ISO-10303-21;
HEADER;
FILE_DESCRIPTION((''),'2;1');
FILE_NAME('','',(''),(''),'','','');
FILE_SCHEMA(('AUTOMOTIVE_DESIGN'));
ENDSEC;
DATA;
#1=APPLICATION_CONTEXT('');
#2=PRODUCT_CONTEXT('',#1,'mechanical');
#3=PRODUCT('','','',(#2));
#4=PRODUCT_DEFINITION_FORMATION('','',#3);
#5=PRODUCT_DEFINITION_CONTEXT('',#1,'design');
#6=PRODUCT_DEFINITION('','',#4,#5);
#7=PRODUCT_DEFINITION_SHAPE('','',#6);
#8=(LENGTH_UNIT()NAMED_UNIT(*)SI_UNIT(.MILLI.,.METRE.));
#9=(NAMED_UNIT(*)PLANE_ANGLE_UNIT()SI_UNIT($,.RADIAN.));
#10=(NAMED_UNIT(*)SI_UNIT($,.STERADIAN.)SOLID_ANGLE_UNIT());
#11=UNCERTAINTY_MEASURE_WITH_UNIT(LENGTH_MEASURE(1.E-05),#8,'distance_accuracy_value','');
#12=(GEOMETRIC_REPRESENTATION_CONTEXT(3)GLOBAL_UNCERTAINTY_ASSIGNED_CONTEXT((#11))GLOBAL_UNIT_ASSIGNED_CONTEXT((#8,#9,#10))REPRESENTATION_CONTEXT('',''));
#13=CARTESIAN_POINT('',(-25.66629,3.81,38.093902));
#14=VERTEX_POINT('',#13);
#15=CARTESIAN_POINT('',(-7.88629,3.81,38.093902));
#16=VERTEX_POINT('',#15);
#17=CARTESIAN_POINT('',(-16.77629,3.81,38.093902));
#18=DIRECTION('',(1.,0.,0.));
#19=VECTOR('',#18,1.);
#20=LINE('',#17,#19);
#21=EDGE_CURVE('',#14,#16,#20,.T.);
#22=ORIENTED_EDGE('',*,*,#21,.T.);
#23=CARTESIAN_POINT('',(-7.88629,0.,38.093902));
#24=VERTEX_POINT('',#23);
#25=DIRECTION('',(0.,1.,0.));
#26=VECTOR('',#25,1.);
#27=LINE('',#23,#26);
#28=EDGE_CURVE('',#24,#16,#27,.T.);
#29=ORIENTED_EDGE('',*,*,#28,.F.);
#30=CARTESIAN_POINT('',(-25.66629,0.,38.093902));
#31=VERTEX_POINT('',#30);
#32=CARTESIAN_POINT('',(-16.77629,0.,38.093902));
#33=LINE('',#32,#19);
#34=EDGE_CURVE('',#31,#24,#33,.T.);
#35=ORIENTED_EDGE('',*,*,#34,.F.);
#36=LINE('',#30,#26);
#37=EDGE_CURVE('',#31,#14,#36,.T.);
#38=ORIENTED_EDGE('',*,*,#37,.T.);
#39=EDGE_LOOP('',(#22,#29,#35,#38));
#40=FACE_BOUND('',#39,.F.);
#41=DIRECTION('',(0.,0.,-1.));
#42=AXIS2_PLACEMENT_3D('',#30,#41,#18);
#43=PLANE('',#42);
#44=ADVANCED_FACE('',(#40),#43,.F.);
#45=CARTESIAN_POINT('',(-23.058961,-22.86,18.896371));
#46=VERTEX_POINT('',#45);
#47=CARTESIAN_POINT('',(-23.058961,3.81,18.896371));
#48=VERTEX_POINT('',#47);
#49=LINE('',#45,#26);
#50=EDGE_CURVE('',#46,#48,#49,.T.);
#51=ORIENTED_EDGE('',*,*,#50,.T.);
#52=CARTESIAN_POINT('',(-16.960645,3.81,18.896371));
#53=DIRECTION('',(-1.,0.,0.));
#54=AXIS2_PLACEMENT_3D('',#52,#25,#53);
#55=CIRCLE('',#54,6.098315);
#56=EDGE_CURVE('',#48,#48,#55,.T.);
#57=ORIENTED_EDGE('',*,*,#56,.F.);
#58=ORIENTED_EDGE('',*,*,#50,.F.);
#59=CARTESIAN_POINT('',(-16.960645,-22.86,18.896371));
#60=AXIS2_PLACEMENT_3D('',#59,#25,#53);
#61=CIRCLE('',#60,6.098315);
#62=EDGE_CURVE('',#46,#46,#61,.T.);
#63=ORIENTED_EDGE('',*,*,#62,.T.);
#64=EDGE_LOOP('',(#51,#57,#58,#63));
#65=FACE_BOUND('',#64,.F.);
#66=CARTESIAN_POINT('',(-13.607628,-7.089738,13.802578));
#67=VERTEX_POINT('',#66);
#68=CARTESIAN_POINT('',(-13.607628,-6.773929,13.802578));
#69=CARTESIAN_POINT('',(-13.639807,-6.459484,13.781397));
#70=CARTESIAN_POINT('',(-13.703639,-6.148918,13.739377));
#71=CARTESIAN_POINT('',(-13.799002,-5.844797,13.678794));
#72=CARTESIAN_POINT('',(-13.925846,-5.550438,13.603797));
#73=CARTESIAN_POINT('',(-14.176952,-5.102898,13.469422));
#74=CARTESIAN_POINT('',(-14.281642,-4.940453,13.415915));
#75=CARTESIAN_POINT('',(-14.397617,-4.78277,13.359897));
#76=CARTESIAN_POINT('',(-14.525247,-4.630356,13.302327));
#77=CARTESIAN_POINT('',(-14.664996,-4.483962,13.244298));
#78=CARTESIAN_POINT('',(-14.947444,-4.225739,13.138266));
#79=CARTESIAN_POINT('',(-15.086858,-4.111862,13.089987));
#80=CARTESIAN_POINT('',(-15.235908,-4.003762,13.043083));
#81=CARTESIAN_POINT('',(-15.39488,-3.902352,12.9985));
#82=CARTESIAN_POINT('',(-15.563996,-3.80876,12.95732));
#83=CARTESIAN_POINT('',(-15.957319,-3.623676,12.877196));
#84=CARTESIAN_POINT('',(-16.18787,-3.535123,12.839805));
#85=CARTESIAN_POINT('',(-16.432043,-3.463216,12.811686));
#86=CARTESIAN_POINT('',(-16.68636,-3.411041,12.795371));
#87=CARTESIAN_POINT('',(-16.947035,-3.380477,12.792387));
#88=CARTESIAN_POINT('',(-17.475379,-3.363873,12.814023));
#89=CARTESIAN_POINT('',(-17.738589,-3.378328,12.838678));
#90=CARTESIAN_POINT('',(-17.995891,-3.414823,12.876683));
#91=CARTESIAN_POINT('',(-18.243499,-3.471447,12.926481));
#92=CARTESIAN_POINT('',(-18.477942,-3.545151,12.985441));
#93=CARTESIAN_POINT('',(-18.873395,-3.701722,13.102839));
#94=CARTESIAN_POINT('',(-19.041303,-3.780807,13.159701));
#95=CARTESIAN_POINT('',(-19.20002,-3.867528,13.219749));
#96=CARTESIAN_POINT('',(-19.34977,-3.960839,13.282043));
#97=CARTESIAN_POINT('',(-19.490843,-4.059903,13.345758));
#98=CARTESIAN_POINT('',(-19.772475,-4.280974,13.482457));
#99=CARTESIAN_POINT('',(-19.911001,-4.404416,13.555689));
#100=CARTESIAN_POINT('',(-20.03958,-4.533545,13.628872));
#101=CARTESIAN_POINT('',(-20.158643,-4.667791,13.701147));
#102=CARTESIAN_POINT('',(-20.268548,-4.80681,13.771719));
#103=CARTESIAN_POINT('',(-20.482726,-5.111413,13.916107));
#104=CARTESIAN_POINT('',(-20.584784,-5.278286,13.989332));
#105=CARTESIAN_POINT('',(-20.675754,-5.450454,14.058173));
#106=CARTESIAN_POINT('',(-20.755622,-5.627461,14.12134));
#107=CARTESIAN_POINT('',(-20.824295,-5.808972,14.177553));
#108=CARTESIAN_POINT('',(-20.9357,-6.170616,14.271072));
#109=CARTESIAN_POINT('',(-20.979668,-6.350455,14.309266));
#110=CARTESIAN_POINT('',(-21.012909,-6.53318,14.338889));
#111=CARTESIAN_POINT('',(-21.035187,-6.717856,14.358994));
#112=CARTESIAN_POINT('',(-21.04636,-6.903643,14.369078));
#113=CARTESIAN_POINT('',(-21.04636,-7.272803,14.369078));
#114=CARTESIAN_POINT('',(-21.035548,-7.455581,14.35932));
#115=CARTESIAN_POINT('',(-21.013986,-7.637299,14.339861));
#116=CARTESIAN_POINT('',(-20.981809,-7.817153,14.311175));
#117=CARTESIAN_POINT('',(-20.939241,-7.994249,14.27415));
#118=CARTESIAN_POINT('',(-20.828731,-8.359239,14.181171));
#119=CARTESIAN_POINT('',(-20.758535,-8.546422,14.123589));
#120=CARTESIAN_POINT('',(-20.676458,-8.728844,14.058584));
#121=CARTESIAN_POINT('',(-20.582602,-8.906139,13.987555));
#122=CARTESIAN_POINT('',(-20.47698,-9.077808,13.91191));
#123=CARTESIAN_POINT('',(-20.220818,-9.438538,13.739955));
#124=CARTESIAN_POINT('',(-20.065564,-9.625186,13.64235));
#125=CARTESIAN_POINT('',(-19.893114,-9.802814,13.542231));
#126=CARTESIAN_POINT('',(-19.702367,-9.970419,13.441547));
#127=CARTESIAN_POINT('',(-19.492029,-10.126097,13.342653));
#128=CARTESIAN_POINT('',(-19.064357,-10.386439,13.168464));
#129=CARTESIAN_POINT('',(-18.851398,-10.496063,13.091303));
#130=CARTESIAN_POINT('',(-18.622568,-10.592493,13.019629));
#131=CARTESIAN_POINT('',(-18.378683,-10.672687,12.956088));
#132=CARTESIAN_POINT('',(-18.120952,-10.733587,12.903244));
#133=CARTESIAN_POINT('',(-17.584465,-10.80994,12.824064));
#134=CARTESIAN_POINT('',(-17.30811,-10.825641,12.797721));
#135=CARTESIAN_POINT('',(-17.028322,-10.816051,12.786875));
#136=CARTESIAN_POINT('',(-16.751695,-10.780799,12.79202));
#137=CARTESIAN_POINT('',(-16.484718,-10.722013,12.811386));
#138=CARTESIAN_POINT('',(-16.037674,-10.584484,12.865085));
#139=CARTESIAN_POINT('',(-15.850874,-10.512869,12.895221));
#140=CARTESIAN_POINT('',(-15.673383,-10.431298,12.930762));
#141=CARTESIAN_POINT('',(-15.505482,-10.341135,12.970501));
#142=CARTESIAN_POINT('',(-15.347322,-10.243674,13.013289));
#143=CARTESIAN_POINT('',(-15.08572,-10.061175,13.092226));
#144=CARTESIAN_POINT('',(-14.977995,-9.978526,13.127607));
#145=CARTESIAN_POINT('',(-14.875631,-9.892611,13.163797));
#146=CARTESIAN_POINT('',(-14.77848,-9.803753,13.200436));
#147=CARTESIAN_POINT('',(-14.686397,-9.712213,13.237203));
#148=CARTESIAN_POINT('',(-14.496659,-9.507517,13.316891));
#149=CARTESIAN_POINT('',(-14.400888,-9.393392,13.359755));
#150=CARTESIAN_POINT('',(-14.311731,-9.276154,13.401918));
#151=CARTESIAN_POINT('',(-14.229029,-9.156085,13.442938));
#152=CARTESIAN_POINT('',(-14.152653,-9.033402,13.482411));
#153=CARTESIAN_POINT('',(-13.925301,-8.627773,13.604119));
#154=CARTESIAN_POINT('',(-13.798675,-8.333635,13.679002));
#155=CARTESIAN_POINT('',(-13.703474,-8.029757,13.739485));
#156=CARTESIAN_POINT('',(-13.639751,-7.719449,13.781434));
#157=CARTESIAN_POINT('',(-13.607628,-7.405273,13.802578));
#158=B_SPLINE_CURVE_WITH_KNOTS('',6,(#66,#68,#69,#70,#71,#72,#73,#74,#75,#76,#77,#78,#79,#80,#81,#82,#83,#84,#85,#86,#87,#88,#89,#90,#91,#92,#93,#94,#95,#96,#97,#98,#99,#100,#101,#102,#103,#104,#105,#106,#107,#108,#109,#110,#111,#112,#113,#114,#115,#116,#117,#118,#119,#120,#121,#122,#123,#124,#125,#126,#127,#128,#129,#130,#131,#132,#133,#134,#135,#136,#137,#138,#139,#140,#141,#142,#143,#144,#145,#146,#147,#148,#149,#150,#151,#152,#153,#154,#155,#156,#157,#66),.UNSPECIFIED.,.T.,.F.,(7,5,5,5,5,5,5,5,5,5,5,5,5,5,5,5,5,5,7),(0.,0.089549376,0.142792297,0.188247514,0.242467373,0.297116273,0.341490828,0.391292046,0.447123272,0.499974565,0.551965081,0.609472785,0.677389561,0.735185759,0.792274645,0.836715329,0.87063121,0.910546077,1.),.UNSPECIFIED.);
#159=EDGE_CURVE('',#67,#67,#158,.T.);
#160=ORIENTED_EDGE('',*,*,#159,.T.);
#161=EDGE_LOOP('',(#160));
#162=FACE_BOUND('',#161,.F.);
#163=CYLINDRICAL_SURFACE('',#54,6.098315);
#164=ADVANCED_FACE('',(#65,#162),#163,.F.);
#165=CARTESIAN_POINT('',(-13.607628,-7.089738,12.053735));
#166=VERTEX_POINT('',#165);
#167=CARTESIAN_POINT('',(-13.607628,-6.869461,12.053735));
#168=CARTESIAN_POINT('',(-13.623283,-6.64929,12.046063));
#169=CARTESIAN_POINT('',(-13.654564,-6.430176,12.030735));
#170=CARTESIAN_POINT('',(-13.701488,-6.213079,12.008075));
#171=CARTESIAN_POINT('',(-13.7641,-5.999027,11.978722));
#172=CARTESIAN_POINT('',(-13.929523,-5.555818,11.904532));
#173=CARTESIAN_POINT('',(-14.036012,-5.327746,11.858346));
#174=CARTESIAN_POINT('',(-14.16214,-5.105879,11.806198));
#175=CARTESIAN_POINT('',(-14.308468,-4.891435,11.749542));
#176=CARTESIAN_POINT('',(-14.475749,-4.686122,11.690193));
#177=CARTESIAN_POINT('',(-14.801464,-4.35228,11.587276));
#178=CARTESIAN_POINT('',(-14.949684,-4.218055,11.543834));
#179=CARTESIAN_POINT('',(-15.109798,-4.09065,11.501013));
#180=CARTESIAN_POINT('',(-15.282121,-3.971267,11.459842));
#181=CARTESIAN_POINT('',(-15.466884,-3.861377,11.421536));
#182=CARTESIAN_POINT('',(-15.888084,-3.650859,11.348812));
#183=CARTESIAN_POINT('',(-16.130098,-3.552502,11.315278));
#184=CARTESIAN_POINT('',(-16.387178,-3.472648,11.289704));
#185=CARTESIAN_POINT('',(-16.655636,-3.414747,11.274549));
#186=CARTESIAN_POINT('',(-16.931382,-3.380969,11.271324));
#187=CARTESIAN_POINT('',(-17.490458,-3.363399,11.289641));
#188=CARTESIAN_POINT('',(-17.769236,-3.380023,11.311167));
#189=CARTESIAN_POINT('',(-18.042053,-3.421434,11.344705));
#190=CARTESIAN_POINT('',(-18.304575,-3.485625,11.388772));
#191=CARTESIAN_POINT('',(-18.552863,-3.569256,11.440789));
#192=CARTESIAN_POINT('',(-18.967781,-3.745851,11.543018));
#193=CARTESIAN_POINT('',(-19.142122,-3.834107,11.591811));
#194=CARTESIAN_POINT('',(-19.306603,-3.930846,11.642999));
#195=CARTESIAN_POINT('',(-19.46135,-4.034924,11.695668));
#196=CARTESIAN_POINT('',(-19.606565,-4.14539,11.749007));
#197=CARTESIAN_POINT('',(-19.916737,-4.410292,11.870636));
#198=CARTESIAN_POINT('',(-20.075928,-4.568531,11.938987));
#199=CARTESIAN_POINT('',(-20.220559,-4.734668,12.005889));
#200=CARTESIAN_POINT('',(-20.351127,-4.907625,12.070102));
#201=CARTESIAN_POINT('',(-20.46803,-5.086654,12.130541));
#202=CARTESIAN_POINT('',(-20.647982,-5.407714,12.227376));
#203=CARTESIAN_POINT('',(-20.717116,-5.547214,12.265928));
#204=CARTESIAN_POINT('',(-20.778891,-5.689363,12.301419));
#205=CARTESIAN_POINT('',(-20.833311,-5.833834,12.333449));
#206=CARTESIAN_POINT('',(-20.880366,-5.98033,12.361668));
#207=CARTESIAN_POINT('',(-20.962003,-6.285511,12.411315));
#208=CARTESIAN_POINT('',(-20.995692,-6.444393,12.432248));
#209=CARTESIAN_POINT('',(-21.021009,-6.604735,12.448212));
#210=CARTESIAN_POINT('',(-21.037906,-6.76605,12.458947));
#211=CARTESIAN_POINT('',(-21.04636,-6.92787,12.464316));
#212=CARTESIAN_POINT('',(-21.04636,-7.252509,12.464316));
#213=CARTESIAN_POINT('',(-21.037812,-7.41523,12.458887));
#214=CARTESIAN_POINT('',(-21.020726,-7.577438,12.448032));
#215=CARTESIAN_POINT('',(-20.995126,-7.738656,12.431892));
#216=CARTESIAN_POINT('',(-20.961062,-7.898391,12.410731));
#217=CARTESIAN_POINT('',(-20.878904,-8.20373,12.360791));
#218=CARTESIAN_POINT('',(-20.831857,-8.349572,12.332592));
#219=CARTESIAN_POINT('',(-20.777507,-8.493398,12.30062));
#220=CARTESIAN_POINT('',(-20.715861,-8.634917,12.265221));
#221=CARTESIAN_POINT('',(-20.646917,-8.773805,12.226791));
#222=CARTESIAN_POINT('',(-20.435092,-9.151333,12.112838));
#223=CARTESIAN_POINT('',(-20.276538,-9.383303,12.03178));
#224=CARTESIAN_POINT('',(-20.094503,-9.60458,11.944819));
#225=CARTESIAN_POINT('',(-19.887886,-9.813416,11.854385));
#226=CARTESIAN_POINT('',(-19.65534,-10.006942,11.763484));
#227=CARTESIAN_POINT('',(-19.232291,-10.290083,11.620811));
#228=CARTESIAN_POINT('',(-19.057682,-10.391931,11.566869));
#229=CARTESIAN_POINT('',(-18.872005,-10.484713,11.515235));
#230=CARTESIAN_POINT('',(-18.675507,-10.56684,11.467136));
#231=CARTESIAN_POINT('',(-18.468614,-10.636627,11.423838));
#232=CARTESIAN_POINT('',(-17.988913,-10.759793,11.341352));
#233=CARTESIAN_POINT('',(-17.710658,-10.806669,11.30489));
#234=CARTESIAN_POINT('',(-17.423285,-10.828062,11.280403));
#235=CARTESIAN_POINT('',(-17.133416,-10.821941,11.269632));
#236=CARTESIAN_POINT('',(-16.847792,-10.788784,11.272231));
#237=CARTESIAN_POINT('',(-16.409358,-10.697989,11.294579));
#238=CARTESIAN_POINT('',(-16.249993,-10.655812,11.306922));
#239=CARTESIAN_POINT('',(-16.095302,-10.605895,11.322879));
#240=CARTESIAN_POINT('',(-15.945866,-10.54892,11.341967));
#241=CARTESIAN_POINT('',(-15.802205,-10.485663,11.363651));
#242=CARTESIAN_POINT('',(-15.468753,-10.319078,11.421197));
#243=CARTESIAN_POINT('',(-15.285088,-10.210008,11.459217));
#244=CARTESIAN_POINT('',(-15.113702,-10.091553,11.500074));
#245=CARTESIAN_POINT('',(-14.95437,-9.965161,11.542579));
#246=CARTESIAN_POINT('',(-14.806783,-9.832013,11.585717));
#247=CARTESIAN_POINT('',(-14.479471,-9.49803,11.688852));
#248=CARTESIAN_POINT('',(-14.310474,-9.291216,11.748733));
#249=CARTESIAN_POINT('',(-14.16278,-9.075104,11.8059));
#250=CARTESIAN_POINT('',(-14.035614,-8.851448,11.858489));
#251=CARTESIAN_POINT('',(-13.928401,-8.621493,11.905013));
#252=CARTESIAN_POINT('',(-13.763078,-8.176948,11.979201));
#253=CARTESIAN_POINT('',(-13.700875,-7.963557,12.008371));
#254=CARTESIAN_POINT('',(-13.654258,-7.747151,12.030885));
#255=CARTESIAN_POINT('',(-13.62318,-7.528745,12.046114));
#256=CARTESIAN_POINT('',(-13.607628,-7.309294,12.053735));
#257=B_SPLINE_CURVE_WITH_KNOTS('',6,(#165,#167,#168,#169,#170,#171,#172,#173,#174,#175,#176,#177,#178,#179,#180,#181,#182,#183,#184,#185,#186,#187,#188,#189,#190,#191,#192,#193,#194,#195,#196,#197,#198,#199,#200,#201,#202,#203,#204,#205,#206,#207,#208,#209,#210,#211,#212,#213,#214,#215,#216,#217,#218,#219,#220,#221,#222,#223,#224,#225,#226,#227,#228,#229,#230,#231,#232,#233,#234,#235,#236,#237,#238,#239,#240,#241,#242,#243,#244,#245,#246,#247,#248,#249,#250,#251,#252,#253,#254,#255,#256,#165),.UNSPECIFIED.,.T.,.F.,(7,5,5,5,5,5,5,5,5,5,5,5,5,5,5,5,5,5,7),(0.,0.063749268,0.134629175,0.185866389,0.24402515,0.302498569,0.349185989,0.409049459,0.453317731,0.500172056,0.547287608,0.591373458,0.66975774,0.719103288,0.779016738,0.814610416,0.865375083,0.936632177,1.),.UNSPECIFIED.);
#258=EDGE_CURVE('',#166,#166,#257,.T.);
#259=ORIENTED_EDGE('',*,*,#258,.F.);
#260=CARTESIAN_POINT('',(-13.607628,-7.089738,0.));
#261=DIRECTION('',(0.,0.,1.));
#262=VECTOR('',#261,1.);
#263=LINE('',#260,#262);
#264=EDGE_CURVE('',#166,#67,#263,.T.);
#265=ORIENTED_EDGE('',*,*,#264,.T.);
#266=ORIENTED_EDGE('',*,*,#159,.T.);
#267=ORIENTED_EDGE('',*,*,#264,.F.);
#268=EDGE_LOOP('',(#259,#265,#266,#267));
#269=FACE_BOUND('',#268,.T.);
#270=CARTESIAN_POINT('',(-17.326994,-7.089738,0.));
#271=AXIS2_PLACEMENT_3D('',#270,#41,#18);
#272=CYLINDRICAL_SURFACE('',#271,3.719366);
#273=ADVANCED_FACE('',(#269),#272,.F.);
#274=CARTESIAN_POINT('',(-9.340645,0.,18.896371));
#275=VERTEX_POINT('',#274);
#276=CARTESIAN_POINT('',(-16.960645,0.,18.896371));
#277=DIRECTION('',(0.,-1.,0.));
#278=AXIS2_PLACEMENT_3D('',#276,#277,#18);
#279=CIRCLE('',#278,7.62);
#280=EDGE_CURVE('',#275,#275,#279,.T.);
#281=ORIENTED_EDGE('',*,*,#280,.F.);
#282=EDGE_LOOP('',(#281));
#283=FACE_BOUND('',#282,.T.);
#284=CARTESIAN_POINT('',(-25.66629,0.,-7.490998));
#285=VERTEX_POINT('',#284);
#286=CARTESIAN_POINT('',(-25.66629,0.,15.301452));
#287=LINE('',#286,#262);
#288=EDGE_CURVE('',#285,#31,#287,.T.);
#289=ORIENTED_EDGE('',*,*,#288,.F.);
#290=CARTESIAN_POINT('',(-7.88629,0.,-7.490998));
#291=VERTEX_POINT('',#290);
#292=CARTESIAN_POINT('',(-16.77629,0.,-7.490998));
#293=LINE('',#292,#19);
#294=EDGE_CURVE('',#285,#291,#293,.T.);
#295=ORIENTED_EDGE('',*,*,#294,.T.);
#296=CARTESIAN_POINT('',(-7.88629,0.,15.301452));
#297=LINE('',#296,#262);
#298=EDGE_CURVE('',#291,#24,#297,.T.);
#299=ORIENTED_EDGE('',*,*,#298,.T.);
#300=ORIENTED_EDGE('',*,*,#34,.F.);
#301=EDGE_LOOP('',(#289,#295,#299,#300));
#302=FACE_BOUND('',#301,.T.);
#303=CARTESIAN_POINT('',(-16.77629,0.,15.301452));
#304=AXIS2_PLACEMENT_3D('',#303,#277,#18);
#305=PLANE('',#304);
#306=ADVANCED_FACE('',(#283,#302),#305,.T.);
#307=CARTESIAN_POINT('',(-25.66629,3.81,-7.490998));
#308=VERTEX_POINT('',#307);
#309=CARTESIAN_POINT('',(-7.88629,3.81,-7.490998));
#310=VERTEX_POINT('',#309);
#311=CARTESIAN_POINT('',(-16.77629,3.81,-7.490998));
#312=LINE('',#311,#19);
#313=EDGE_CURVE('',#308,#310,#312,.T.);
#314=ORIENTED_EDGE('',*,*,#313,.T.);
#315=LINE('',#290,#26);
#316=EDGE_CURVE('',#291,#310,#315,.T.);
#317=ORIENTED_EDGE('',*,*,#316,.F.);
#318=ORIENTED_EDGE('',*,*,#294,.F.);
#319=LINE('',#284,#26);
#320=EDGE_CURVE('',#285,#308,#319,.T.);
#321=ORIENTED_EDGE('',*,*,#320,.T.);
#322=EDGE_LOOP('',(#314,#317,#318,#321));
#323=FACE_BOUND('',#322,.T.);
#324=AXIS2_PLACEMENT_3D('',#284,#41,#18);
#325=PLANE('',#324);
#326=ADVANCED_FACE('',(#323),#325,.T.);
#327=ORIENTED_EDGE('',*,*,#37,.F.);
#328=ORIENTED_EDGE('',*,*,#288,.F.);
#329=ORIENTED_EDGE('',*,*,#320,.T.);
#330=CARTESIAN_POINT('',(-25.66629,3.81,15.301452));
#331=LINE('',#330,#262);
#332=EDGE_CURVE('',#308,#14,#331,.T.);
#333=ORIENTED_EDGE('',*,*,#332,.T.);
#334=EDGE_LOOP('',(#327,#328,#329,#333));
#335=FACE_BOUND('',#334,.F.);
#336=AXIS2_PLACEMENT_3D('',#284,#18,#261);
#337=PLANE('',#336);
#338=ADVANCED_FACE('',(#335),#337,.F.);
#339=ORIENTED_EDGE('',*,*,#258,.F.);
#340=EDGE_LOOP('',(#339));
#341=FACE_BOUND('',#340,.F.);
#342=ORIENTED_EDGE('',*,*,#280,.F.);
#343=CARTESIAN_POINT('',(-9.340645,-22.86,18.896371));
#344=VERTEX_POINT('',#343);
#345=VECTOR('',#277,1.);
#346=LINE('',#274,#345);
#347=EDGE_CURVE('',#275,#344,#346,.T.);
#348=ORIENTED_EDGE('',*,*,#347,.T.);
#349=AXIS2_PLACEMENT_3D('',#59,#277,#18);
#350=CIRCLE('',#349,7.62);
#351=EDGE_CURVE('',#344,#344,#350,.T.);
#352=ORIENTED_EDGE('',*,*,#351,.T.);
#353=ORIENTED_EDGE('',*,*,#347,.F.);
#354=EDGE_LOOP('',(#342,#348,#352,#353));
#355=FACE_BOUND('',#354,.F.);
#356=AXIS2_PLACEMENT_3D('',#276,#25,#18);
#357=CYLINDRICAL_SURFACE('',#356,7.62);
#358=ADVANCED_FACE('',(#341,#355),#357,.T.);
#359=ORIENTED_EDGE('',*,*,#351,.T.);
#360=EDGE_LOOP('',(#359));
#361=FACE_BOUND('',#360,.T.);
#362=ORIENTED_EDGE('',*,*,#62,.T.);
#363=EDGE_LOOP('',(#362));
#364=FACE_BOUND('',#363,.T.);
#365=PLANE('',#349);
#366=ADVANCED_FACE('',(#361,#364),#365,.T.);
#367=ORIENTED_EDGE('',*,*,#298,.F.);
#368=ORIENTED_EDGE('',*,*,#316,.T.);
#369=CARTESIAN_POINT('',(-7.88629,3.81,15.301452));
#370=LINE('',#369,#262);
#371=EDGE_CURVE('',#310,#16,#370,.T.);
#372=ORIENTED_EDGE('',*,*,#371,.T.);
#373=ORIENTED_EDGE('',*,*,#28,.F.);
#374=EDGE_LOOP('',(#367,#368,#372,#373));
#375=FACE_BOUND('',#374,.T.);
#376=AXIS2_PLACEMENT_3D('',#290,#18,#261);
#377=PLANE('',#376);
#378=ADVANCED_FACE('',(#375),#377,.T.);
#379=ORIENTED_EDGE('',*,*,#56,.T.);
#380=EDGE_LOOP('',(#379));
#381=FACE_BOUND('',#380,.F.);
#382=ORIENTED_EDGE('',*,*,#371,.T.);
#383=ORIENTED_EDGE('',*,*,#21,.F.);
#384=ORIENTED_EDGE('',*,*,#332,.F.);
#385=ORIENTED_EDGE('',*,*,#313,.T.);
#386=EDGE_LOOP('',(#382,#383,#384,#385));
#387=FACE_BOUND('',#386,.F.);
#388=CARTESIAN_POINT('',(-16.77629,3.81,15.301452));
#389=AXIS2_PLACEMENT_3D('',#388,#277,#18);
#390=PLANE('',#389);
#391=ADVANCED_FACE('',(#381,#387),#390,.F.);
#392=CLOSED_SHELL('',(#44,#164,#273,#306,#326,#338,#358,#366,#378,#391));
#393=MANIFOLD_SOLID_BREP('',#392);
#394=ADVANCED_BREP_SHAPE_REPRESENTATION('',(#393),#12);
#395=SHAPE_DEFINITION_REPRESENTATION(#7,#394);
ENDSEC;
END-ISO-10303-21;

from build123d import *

# Parameters (mm, degrees)
F0_R      = 7.62
F1_DEPTH  = 22.86
F2_R      = 5.3975
F3_DEPTH  = 25.4
F4_W      = 17.78
F4_H      = 45.5848994723
F5_DEPTH  = 3.81
F6_DEPTH  = 25.4
F7_R      = 6.0983154317
F8_DEPTH  = 25.4
F9_R      = 3.7193661061
F10_DEPTH = 17.78
F11_DEPTH = 25.4


with BuildPart() as f1:
    # F0 (on Front) → F1 (new body)
    with BuildSketch(Plane.XZ):
        with Locations((-16.9606450945, 18.8963711262)):
            Circle(F0_R)
    extrude(amount=F1_DEPTH)

    # F2 (on face) → F3 (cut)
    with BuildSketch(Plane.XZ.offset(22.86)):
        with Locations((-16.9606450945, 18.8963711262)):
            Circle(F2_R)
    extrude(amount=-F3_DEPTH, mode=Mode.SUBTRACT)

    # F4 (on Front) → F5 (join)
    with BuildSketch(Plane.XZ):
        with Locations((-16.7762902565, 15.3014517855)):
            Rectangle(F4_W, F4_H)
    extrude(amount=-F5_DEPTH)

    # F6 (cut): a face of the model
    f6_faces = [f1.faces().sort_by_distance(p)[0] for p in [
        (-16.9606450945, 0, 18.8963711262),
    ]]
    extrude(f6_faces, amount=-F6_DEPTH, mode=Mode.SUBTRACT)

    # F7 (on face) → F8 (cut)
    with BuildSketch(Plane(origin=(0, 3.81, 0), x_dir=(-1, 0, 0), z_dir=(0, 1, 0))):
        with Locations((16.9606450945, 18.8963711262)):
            Circle(F7_R)
    extrude(amount=-F8_DEPTH, mode=Mode.SUBTRACT)

    # F9 (on Top) → F10 (cut)
    with BuildSketch(Plane.XY):
        with Locations((-17.3269938678, -7.0897382684)):
            Circle(F9_R)
    extrude(amount=F10_DEPTH, mode=Mode.SUBTRACT)

    # F11 (cut): a face of the model
    f11_faces = [f1.faces().sort_by_distance(p)[0] for p in [
        (-11.0348160706, -21.59, 18.8963711262),
    ]]
    extrude(f11_faces, amount=-F11_DEPTH, mode=Mode.SUBTRACT)


solid = f1.part
